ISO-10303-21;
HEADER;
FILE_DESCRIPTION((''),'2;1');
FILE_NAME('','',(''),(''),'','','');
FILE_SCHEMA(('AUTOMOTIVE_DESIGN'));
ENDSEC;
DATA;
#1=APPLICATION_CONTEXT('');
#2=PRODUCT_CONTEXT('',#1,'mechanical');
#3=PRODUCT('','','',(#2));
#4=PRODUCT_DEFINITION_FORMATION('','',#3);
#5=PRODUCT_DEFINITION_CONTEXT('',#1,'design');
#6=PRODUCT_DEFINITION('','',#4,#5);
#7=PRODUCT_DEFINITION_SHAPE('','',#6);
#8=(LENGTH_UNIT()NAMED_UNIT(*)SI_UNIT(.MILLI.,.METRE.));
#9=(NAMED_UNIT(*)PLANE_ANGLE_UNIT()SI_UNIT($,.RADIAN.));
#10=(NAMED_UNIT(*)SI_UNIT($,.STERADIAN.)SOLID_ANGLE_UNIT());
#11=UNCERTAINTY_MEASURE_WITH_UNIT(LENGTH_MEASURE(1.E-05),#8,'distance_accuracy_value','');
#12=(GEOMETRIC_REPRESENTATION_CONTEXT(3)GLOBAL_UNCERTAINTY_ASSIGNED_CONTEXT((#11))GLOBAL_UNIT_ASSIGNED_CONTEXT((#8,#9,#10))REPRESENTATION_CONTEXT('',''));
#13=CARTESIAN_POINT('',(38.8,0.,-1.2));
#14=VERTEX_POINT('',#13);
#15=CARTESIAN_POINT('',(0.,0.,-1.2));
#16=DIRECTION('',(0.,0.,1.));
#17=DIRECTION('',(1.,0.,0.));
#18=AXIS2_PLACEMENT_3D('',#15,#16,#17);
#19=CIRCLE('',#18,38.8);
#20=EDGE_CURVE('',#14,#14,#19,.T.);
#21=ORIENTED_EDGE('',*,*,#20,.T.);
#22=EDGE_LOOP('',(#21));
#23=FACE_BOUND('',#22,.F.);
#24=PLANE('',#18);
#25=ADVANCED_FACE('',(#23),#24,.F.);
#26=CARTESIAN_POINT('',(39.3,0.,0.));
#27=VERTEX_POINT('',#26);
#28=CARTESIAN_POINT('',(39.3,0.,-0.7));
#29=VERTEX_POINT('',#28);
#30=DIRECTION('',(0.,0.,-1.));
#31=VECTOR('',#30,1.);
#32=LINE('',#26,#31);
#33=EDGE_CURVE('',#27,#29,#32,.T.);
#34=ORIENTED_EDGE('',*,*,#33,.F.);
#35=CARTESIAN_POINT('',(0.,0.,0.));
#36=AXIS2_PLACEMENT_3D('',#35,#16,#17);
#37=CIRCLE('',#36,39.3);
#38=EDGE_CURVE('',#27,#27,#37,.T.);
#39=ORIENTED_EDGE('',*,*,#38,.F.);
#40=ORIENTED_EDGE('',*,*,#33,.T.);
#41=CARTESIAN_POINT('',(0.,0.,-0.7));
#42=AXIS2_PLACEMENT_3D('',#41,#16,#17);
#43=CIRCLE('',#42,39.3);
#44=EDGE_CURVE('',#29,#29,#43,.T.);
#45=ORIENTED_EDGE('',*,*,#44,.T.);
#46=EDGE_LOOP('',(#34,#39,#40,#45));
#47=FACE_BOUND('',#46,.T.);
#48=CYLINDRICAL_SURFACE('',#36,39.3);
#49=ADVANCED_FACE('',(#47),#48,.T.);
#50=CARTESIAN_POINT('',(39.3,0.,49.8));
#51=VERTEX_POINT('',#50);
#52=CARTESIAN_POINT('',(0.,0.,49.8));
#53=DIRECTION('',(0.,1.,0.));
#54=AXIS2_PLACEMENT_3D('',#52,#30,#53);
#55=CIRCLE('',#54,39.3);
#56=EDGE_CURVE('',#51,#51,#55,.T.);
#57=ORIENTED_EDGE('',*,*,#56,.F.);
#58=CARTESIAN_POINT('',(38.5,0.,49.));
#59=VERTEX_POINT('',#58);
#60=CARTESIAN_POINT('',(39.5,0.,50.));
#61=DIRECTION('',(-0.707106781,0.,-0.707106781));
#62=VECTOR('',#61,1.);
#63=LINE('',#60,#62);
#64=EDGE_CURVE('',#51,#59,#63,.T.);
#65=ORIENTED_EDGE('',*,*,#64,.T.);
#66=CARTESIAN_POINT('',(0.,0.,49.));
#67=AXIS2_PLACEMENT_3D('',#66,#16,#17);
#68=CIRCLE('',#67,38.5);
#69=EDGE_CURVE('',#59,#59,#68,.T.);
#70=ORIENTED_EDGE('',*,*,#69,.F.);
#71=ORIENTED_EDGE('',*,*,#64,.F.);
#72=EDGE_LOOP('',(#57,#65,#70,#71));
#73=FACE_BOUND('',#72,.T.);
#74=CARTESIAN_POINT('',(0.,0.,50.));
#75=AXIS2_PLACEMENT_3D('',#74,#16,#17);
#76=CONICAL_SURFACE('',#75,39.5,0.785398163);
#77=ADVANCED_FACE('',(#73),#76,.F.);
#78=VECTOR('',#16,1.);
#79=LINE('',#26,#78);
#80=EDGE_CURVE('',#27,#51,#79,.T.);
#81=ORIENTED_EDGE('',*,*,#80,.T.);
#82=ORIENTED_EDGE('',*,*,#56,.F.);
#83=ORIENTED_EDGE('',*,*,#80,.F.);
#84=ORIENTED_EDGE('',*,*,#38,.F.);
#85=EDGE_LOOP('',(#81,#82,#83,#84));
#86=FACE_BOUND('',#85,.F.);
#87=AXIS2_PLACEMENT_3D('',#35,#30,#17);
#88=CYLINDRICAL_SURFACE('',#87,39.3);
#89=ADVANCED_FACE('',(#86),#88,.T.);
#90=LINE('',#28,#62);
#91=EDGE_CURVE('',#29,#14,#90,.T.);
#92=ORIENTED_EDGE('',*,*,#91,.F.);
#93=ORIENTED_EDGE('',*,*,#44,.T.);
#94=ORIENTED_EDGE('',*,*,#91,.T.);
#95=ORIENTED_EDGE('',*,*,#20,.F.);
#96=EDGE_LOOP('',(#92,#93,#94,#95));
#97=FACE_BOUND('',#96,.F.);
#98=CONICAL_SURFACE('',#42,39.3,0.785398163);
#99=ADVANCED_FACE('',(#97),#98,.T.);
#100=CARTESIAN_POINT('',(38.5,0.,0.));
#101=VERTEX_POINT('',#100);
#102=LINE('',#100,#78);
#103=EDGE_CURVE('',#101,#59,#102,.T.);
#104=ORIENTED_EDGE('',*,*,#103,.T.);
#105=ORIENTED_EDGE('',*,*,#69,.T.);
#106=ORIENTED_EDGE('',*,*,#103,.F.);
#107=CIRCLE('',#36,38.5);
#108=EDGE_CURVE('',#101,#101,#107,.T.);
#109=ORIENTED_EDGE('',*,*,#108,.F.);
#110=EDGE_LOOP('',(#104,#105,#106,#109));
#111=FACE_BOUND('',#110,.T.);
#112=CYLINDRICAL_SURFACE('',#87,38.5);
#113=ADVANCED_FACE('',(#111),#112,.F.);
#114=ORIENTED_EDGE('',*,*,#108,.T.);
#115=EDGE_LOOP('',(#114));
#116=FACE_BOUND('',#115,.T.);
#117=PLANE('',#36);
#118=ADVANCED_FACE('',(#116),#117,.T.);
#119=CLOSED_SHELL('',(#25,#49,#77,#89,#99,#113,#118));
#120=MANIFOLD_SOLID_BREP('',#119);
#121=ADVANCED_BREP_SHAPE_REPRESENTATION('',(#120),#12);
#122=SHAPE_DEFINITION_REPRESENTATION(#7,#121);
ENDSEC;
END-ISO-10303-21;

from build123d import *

# Parameters (mm, degrees)
F0_R     = 39.3
F0_R_2   = 38.5
F1_DEPTH = 1.2
F2_DEPTH = 50
F4_SIZE  = 0.5


# Not quite as in the source:
# - a fillet or chamfer that OpenCascade refuses, or shapes differently, is made with other operations: its cross-section is extruded or revolved along the edge and cut away or added


with BuildPart() as f1:
    # F0 (on Top) → F1 (new body)
    with BuildSketch(Plane.XY):
        Circle(F0_R)
        Circle(F0_R_2, mode=Mode.SUBTRACT)
        Circle(F0_R_2)
    extrude(amount=-F1_DEPTH)

    # F0 (on Top) → F2 (join)
    with BuildSketch(Plane.XY):
        Circle(F0_R)
        Circle(F0_R_2, mode=Mode.SUBTRACT)
    extrude(amount=F2_DEPTH)

    # F3: chamfer of 1 on 1 edges, made by hand

    # F3_s1 → F3_t2 (revolve, cut)
    with BuildSketch(Plane.XZ):
        Polygon((39.5, 50), (38.5, 49), (38.5, 50), align=None)
    revolve(axis=Axis((0, 0, 50), (0, 0, 1)), mode=Mode.SUBTRACT)

    # F4
    f4_edges = [f1.edges().sort_by_distance(p)[0] for p in [
        (-39.3, 0, -1.2),
    ]]
    chamfer(f4_edges, length=F4_SIZE)


solid = f1.part
